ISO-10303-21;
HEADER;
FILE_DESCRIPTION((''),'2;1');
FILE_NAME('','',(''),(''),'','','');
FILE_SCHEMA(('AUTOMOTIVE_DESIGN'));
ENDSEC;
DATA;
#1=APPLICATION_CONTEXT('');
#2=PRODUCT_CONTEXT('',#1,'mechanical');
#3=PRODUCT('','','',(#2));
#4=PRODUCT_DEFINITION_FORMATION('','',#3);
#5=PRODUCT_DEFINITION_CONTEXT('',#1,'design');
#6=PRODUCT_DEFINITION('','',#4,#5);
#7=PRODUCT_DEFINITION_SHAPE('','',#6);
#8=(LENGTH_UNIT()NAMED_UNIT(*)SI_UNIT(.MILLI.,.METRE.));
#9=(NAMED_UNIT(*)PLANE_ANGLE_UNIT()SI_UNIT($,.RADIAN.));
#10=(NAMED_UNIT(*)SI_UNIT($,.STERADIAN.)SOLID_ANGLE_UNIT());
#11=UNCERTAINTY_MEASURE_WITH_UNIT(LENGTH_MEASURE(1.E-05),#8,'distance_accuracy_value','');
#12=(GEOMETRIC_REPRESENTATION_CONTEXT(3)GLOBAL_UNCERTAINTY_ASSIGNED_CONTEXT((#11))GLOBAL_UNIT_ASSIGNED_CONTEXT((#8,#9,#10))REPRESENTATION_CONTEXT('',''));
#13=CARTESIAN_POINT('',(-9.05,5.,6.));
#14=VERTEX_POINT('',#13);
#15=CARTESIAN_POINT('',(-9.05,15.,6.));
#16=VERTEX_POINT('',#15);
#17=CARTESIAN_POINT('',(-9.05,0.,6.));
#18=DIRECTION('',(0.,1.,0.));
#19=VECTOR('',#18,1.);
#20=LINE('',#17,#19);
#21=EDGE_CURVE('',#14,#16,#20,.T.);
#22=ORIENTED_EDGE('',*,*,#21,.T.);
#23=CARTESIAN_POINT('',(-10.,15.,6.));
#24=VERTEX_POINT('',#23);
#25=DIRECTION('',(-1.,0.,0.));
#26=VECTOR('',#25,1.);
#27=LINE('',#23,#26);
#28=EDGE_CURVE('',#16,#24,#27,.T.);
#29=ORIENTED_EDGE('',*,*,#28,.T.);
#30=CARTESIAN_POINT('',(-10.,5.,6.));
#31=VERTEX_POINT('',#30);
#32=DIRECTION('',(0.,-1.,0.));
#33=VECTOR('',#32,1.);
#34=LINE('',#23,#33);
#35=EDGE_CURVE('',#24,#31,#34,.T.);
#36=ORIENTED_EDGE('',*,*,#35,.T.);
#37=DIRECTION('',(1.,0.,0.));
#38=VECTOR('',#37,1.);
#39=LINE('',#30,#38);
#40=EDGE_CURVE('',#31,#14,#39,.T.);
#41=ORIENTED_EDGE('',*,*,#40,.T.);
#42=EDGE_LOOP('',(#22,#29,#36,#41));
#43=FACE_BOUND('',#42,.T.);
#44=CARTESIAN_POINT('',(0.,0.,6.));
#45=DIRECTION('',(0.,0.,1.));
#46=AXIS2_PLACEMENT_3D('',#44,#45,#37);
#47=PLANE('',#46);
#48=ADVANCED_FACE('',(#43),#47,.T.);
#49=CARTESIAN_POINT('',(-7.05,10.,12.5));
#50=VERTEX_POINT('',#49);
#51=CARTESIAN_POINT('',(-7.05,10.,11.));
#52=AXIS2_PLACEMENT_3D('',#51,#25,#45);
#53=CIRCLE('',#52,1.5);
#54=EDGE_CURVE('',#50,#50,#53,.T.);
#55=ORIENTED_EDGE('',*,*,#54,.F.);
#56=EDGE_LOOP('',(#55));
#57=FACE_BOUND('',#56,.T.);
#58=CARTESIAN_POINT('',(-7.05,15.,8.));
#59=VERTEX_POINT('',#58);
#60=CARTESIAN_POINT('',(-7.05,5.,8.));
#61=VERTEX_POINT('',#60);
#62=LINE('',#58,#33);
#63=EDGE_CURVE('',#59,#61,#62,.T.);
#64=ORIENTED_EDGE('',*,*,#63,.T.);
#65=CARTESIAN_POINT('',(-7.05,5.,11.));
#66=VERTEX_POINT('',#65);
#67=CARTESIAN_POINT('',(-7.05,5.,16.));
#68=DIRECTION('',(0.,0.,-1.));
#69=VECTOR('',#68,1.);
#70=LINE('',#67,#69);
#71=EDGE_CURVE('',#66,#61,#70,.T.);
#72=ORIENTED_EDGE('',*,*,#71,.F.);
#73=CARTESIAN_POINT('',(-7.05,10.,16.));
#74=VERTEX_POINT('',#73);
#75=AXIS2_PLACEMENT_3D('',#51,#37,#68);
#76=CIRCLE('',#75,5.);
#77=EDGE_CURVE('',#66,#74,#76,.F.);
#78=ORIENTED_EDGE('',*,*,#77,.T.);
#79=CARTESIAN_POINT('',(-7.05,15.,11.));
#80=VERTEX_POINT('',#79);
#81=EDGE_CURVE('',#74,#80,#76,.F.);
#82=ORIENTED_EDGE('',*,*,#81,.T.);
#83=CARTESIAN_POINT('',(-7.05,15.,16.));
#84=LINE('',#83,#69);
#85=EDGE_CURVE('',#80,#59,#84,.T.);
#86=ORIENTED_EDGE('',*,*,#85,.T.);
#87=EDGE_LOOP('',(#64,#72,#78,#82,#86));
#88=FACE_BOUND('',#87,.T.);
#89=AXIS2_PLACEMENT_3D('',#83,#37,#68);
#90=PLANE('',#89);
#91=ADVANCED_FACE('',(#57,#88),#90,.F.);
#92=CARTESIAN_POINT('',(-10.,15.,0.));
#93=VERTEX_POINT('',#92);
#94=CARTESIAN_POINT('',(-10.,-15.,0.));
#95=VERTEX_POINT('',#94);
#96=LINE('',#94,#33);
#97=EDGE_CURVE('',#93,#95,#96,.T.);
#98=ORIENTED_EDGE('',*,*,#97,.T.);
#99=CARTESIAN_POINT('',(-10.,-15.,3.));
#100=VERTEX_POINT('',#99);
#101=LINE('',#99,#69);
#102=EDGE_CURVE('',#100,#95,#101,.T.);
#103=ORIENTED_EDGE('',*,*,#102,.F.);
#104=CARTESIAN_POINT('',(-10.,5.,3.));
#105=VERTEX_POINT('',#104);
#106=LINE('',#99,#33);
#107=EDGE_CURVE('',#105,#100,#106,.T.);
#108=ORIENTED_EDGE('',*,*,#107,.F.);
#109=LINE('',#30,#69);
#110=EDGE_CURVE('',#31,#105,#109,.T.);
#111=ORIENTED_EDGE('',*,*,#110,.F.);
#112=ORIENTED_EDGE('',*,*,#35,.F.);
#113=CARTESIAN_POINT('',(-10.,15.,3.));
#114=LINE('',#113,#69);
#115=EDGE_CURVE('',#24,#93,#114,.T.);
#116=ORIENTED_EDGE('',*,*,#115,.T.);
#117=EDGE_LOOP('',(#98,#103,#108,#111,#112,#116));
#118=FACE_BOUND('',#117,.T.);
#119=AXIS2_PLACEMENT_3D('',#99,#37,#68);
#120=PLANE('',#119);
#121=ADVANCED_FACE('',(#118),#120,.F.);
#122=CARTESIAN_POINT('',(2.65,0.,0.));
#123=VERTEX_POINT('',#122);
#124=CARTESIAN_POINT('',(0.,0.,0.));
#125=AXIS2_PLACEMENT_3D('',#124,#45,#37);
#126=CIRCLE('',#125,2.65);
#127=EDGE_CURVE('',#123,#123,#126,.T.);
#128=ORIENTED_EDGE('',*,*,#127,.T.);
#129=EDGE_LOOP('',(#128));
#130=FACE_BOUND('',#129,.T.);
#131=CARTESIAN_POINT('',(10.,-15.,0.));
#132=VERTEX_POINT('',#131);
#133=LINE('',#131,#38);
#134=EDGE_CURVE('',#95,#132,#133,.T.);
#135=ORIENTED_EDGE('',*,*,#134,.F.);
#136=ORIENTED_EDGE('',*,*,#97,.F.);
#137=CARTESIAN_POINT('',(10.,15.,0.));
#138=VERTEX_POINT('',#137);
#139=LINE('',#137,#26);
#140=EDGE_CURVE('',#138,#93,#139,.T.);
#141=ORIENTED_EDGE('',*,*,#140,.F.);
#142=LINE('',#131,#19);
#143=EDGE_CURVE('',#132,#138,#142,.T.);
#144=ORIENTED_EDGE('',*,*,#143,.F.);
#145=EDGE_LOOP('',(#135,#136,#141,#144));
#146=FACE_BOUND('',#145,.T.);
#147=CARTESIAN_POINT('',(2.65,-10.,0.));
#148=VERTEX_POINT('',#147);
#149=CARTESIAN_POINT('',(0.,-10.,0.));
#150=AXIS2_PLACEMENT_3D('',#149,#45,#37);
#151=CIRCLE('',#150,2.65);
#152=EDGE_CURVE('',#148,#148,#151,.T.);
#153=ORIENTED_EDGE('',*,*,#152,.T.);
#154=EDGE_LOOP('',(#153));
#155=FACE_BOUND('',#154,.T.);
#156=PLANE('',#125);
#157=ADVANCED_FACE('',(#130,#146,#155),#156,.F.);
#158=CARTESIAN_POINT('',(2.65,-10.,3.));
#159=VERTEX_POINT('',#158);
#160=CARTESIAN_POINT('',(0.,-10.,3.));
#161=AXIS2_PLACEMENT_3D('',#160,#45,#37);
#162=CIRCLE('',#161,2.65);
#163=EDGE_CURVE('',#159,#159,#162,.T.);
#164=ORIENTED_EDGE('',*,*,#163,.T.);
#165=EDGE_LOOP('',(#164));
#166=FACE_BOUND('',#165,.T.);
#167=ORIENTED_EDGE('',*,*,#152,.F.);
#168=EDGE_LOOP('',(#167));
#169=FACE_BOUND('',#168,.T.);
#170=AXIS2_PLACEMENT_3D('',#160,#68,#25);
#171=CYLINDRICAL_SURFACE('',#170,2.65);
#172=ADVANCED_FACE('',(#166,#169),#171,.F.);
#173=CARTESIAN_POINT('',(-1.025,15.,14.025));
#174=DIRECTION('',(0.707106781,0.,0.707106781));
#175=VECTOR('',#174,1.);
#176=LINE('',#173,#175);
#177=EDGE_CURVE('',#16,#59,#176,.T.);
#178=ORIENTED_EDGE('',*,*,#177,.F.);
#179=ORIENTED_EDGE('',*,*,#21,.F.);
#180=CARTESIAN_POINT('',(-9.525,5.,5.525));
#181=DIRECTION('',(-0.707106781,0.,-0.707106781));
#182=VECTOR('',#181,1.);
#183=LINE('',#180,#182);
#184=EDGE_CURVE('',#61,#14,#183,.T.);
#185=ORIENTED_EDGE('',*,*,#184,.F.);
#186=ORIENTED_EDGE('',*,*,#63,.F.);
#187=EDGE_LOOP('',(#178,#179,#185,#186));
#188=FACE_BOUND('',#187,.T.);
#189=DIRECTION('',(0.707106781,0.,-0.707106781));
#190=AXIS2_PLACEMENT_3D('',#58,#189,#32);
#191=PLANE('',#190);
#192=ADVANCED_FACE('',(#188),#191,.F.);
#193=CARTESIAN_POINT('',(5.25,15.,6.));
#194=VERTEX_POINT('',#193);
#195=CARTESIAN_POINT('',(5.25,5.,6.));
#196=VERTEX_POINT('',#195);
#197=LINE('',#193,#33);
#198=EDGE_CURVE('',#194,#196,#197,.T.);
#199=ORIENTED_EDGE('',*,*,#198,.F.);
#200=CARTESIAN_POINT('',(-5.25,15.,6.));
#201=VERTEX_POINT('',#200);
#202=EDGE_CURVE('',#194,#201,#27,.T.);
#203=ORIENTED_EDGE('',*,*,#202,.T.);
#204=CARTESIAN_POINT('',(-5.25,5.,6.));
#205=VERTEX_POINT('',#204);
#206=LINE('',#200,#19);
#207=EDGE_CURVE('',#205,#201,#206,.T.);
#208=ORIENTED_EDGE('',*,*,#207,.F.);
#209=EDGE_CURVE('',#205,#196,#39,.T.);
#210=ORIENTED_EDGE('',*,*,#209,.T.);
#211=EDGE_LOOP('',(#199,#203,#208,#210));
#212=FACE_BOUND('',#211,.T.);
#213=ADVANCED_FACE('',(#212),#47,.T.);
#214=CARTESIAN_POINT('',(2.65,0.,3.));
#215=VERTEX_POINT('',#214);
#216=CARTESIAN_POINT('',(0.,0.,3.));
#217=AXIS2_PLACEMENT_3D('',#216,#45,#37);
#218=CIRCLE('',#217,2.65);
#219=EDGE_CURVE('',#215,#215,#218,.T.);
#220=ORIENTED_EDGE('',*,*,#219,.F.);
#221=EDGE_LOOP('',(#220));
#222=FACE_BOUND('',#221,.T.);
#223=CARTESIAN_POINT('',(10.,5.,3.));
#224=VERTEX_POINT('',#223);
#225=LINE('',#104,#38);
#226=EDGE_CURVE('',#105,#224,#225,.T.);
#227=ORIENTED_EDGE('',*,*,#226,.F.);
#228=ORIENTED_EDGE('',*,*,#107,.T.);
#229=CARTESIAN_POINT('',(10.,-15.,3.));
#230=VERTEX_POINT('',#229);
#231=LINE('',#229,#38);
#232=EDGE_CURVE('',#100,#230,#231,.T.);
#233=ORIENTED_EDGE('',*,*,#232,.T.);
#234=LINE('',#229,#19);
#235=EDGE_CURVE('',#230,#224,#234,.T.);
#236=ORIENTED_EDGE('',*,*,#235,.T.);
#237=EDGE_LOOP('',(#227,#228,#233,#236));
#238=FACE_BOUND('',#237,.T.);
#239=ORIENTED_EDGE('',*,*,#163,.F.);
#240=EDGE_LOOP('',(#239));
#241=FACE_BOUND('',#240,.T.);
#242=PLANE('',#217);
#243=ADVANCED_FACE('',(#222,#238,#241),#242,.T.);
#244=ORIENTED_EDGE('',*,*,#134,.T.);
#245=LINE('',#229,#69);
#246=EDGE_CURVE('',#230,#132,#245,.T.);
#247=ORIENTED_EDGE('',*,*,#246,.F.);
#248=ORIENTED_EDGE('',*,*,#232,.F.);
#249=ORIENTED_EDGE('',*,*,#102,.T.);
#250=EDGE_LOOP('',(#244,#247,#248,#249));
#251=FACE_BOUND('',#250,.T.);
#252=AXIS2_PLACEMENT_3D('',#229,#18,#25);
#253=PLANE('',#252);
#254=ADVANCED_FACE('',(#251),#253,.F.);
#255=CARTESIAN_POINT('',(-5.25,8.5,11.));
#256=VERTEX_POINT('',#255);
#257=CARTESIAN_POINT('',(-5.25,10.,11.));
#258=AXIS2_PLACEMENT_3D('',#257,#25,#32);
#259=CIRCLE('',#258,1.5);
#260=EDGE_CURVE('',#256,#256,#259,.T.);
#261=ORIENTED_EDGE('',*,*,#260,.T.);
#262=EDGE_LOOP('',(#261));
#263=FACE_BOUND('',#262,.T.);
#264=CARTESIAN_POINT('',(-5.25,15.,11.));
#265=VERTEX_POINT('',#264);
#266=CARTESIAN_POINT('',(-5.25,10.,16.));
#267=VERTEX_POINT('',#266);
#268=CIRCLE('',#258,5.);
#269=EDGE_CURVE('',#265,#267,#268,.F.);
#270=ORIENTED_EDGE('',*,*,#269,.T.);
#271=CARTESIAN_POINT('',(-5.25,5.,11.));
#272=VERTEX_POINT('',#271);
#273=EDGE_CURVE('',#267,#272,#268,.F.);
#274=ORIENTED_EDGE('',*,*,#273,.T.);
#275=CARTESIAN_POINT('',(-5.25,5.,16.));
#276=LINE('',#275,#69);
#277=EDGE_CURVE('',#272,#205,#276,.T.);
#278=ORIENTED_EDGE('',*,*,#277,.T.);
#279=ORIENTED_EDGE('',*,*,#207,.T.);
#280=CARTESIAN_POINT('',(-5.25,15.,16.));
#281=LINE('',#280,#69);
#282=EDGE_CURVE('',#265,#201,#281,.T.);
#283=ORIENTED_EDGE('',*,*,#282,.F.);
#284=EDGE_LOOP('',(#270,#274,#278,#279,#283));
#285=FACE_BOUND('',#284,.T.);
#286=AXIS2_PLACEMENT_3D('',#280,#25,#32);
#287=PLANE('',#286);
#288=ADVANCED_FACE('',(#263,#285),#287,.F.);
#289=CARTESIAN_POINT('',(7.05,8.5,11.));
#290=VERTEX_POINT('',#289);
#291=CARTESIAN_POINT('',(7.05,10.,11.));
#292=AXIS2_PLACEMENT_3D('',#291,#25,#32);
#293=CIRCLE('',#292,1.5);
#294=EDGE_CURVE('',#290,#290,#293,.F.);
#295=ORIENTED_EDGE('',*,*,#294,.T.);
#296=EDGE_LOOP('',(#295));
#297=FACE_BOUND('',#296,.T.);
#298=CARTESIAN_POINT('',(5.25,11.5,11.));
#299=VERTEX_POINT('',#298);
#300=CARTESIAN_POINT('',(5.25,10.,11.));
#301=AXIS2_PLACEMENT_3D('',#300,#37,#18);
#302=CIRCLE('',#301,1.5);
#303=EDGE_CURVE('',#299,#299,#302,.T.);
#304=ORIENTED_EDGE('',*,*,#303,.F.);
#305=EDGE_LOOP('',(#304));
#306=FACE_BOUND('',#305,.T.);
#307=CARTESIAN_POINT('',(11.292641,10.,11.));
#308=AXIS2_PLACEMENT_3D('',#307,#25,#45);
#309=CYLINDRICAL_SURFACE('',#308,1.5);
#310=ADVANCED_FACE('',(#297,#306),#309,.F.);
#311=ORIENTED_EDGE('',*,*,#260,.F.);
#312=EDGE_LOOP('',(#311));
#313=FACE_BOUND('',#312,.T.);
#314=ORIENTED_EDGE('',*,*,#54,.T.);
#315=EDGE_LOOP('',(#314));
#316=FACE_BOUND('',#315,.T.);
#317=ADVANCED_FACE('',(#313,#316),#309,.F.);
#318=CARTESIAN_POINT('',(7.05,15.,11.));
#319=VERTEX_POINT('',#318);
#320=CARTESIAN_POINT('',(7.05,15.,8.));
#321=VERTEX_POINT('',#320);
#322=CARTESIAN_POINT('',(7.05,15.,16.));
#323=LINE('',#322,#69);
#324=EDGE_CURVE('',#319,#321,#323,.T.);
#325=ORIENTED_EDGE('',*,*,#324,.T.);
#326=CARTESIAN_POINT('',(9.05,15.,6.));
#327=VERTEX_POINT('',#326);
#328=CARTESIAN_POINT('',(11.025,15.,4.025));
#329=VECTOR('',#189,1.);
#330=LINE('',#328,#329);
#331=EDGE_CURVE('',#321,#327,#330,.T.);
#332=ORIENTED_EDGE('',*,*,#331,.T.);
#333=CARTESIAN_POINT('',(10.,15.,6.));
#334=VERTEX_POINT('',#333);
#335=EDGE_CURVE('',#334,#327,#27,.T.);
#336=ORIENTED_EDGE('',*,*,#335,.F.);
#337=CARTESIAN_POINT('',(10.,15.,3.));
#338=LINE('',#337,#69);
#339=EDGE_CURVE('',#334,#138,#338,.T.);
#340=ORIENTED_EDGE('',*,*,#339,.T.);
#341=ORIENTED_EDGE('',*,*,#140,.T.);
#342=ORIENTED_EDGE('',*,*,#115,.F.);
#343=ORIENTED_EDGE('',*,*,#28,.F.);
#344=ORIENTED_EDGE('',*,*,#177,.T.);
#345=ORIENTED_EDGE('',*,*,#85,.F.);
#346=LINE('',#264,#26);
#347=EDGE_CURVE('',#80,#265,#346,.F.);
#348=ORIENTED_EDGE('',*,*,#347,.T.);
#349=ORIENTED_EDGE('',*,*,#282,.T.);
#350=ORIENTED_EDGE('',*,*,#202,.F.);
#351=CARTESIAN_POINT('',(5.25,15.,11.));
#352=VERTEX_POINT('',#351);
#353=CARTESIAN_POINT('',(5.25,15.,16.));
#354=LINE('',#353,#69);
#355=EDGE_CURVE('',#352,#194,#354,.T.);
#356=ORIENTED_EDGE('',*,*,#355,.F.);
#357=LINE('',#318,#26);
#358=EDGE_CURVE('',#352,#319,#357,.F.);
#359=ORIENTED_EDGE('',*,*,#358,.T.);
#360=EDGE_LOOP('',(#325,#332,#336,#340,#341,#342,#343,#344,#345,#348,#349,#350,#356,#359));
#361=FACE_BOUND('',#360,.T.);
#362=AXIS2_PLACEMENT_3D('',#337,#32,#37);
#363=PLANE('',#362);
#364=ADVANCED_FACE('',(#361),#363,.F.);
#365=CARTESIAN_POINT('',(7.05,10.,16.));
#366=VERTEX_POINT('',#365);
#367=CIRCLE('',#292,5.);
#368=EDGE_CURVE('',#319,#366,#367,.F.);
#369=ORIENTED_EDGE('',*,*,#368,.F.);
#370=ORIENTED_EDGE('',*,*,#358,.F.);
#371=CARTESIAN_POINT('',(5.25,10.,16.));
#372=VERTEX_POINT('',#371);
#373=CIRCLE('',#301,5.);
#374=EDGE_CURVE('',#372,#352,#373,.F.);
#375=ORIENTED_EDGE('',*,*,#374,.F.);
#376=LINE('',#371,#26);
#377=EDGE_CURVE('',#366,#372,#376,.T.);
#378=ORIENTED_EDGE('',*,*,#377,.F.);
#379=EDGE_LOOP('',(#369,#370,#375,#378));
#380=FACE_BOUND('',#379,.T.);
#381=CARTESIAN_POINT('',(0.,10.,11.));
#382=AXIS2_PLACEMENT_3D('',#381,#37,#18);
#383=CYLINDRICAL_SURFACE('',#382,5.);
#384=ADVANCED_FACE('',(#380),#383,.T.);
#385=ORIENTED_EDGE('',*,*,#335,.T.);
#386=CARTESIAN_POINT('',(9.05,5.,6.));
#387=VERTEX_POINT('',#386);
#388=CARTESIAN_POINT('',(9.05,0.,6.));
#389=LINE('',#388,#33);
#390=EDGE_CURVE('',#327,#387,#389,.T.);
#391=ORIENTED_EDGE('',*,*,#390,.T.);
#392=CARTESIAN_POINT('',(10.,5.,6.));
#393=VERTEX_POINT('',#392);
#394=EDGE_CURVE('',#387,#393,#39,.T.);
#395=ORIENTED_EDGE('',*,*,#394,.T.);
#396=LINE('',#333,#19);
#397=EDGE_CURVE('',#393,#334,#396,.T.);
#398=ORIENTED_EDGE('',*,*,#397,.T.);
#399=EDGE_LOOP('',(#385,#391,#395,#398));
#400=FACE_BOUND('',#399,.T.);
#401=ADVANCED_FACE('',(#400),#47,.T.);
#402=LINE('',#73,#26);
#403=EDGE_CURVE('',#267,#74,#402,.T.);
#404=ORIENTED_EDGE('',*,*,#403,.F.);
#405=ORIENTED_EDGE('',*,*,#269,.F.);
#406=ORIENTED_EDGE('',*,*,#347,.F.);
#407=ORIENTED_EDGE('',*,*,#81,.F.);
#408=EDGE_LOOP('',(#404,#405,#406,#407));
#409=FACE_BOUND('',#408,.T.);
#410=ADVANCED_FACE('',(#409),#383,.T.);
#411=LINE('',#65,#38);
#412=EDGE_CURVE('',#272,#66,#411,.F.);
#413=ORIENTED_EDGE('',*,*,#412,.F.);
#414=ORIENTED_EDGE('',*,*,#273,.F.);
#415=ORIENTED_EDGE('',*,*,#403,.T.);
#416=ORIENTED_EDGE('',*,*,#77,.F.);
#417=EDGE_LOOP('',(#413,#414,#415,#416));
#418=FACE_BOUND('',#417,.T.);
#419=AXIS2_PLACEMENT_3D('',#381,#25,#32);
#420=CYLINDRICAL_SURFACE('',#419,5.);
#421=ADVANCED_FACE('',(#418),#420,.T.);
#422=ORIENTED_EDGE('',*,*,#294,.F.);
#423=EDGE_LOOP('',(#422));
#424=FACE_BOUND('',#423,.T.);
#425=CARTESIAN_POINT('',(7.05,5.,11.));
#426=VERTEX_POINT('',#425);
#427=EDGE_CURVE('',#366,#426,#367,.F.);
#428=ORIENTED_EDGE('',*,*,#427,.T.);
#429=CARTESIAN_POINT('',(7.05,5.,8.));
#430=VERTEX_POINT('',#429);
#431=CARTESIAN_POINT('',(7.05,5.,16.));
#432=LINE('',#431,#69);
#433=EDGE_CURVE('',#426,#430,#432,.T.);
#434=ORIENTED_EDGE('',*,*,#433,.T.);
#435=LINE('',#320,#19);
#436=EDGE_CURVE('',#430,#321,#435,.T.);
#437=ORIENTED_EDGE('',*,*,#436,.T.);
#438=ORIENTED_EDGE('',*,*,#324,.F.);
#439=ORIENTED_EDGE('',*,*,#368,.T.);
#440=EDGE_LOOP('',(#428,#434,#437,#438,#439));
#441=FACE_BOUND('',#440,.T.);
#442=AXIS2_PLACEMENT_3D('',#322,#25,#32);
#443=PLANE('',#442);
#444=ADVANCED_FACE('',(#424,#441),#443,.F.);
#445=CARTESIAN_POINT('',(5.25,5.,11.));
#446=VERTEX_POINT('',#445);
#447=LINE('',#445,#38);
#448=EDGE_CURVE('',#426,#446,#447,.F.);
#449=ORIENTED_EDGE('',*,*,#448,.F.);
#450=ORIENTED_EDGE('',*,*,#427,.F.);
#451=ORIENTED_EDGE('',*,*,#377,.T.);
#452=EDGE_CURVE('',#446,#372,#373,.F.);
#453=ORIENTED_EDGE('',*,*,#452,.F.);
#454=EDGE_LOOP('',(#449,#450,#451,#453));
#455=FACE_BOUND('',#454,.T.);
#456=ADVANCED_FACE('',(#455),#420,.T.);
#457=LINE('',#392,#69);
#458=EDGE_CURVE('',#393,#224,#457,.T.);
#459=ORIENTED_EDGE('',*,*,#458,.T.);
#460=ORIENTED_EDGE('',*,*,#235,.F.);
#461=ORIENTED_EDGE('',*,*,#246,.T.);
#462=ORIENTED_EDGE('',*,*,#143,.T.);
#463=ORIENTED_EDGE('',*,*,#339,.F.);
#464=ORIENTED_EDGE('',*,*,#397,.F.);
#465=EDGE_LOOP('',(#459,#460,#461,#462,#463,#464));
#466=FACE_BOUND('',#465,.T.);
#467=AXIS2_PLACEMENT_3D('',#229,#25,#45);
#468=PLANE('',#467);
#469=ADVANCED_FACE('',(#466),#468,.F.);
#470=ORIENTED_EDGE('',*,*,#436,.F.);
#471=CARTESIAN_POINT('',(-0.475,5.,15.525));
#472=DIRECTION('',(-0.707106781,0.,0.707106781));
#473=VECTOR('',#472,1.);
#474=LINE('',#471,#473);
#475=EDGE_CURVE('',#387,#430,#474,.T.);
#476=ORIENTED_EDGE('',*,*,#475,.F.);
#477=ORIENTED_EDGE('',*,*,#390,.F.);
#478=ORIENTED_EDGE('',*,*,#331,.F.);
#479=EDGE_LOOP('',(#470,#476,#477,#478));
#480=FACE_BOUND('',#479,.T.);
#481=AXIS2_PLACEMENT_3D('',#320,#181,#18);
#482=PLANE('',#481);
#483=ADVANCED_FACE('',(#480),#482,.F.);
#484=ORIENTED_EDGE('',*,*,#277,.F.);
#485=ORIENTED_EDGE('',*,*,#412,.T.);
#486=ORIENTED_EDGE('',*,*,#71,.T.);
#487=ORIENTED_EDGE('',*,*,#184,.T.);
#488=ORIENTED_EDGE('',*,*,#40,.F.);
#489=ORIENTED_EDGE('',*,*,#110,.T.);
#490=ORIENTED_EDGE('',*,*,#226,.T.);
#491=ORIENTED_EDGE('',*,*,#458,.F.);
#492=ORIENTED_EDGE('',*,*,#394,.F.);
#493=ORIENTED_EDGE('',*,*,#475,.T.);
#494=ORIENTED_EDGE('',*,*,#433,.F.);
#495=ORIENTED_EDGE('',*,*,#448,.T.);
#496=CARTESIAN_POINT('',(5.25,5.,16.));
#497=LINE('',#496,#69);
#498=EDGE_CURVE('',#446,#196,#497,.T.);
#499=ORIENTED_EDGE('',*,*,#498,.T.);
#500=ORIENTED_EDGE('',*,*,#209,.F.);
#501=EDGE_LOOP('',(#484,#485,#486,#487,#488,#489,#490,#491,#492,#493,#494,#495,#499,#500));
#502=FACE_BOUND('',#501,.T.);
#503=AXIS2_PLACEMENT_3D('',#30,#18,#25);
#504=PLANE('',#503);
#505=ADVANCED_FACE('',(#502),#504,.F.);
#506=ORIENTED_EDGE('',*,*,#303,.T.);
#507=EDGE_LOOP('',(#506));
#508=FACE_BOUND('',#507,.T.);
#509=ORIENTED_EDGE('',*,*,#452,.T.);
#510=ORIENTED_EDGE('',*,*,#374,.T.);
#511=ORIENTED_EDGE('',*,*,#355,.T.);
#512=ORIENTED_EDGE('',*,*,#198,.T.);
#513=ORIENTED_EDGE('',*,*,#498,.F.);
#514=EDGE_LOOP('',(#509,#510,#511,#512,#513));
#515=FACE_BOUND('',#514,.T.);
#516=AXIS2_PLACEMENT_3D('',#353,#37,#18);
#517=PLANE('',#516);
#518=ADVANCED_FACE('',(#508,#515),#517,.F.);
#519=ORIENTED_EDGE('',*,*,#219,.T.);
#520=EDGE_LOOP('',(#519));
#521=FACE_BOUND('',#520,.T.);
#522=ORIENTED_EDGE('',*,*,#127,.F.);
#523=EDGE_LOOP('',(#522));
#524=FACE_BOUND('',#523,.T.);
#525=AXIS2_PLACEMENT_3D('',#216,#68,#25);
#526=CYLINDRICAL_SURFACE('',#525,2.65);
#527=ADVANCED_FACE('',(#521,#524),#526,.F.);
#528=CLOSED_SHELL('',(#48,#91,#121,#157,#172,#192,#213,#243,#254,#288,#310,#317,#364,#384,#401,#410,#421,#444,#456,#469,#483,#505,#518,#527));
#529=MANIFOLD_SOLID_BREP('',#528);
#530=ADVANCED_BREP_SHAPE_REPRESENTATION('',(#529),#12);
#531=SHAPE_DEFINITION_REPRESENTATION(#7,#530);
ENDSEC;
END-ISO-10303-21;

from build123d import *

# Parameters (mm, degrees)
SKETCH1_W           = 20
SKETCH1_H           = 30
SKETCH1_R           = 2.65
BOSS_EXTRUDE1_DEPTH = 3
SKETCH2_W           = 20
SKETCH2_H           = 10
BOSS_EXTRUDE2_DEPTH = 3
SKETCH3_W           = 1.8
SKETCH3_H           = 10
BOSS_EXTRUDE3_DEPTH = 10
FILLET1_R           = 5
CUT_EXTRUDE1_REACH  = 29.78
SKETCH4_R           = 1.5
CHAMFER1_SIZE       = 2


with BuildPart() as part:
    # Sketch1 → Boss-Extrude1 (new body)
    with BuildSketch(Plane.XY):
        Rectangle(SKETCH1_W, SKETCH1_H)
        with Locations((0, -10)):
            Circle(SKETCH1_R, mode=Mode.SUBTRACT)
        Circle(SKETCH1_R, mode=Mode.SUBTRACT)
    extrude(amount=BOSS_EXTRUDE1_DEPTH)

    # Sketch2 → Boss-Extrude2 (add)
    with BuildSketch(Plane.XY.offset(3)):
        with Locations((0, 10)):
            Rectangle(SKETCH2_W, SKETCH2_H)
    extrude(amount=BOSS_EXTRUDE2_DEPTH)

    # Sketch3 → Boss-Extrude3 (add)
    with BuildSketch(Plane.XY.offset(6)):
        with Locations((-6.15, 10)):
            Rectangle(SKETCH3_W, SKETCH3_H)
        with Locations((6.15, 10)):
            Rectangle(SKETCH3_W, SKETCH3_H)
    extrude(amount=BOSS_EXTRUDE3_DEPTH)

    # Fillet1
    fillet1_edges = [part.edges().sort_by_distance(p)[0] for p in [
        (6.15, 5, 16),
        (-6.15, 5, 16),
        (6.15, 15, 16),
        (-6.15, 15, 16),
    ]]
    fillet(fillet1_edges, radius=FILLET1_R - 0.0001)  # a hair under: the kernel refuses the full size

    # Cut-Extrude1: up to this face of the body (flat: up to its plane)
    cut_extrude1_end = Plane(part.part.faces().sort_by_distance((7.05, 10, 10.533268934))[0])
    # Sketch4 → Cut-Extrude1 (cut, up to the picked face)
    with BuildSketch(Plane.ZY.offset(7.05), mode=Mode.PRIVATE) as cut_extrude1_sk1:
        with Locations(Location((11, 10, 0), (0, 0, 270))):
            Circle(SKETCH4_R)
    cut_extrude1_tool1 = split(extrude(cut_extrude1_sk1.sketch, amount=-CUT_EXTRUDE1_REACH, mode=Mode.PRIVATE), bisect_by=cut_extrude1_end, keep=Keep.BOTH, mode=Mode.PRIVATE)
    add(cut_extrude1_tool1.solids().sort_by(Axis((-7.05, 10, 11), (1, 0, 0)))[0], mode=Mode.SUBTRACT)

    # Chamfer1
    chamfer1_edges = [part.edges().sort_by_distance(p)[0] for p in [
        (-7.05, 10, 6),
        (7.05, 10, 6),
    ]]
    chamfer(chamfer1_edges, length=CHAMFER1_SIZE)


solid = part.part
